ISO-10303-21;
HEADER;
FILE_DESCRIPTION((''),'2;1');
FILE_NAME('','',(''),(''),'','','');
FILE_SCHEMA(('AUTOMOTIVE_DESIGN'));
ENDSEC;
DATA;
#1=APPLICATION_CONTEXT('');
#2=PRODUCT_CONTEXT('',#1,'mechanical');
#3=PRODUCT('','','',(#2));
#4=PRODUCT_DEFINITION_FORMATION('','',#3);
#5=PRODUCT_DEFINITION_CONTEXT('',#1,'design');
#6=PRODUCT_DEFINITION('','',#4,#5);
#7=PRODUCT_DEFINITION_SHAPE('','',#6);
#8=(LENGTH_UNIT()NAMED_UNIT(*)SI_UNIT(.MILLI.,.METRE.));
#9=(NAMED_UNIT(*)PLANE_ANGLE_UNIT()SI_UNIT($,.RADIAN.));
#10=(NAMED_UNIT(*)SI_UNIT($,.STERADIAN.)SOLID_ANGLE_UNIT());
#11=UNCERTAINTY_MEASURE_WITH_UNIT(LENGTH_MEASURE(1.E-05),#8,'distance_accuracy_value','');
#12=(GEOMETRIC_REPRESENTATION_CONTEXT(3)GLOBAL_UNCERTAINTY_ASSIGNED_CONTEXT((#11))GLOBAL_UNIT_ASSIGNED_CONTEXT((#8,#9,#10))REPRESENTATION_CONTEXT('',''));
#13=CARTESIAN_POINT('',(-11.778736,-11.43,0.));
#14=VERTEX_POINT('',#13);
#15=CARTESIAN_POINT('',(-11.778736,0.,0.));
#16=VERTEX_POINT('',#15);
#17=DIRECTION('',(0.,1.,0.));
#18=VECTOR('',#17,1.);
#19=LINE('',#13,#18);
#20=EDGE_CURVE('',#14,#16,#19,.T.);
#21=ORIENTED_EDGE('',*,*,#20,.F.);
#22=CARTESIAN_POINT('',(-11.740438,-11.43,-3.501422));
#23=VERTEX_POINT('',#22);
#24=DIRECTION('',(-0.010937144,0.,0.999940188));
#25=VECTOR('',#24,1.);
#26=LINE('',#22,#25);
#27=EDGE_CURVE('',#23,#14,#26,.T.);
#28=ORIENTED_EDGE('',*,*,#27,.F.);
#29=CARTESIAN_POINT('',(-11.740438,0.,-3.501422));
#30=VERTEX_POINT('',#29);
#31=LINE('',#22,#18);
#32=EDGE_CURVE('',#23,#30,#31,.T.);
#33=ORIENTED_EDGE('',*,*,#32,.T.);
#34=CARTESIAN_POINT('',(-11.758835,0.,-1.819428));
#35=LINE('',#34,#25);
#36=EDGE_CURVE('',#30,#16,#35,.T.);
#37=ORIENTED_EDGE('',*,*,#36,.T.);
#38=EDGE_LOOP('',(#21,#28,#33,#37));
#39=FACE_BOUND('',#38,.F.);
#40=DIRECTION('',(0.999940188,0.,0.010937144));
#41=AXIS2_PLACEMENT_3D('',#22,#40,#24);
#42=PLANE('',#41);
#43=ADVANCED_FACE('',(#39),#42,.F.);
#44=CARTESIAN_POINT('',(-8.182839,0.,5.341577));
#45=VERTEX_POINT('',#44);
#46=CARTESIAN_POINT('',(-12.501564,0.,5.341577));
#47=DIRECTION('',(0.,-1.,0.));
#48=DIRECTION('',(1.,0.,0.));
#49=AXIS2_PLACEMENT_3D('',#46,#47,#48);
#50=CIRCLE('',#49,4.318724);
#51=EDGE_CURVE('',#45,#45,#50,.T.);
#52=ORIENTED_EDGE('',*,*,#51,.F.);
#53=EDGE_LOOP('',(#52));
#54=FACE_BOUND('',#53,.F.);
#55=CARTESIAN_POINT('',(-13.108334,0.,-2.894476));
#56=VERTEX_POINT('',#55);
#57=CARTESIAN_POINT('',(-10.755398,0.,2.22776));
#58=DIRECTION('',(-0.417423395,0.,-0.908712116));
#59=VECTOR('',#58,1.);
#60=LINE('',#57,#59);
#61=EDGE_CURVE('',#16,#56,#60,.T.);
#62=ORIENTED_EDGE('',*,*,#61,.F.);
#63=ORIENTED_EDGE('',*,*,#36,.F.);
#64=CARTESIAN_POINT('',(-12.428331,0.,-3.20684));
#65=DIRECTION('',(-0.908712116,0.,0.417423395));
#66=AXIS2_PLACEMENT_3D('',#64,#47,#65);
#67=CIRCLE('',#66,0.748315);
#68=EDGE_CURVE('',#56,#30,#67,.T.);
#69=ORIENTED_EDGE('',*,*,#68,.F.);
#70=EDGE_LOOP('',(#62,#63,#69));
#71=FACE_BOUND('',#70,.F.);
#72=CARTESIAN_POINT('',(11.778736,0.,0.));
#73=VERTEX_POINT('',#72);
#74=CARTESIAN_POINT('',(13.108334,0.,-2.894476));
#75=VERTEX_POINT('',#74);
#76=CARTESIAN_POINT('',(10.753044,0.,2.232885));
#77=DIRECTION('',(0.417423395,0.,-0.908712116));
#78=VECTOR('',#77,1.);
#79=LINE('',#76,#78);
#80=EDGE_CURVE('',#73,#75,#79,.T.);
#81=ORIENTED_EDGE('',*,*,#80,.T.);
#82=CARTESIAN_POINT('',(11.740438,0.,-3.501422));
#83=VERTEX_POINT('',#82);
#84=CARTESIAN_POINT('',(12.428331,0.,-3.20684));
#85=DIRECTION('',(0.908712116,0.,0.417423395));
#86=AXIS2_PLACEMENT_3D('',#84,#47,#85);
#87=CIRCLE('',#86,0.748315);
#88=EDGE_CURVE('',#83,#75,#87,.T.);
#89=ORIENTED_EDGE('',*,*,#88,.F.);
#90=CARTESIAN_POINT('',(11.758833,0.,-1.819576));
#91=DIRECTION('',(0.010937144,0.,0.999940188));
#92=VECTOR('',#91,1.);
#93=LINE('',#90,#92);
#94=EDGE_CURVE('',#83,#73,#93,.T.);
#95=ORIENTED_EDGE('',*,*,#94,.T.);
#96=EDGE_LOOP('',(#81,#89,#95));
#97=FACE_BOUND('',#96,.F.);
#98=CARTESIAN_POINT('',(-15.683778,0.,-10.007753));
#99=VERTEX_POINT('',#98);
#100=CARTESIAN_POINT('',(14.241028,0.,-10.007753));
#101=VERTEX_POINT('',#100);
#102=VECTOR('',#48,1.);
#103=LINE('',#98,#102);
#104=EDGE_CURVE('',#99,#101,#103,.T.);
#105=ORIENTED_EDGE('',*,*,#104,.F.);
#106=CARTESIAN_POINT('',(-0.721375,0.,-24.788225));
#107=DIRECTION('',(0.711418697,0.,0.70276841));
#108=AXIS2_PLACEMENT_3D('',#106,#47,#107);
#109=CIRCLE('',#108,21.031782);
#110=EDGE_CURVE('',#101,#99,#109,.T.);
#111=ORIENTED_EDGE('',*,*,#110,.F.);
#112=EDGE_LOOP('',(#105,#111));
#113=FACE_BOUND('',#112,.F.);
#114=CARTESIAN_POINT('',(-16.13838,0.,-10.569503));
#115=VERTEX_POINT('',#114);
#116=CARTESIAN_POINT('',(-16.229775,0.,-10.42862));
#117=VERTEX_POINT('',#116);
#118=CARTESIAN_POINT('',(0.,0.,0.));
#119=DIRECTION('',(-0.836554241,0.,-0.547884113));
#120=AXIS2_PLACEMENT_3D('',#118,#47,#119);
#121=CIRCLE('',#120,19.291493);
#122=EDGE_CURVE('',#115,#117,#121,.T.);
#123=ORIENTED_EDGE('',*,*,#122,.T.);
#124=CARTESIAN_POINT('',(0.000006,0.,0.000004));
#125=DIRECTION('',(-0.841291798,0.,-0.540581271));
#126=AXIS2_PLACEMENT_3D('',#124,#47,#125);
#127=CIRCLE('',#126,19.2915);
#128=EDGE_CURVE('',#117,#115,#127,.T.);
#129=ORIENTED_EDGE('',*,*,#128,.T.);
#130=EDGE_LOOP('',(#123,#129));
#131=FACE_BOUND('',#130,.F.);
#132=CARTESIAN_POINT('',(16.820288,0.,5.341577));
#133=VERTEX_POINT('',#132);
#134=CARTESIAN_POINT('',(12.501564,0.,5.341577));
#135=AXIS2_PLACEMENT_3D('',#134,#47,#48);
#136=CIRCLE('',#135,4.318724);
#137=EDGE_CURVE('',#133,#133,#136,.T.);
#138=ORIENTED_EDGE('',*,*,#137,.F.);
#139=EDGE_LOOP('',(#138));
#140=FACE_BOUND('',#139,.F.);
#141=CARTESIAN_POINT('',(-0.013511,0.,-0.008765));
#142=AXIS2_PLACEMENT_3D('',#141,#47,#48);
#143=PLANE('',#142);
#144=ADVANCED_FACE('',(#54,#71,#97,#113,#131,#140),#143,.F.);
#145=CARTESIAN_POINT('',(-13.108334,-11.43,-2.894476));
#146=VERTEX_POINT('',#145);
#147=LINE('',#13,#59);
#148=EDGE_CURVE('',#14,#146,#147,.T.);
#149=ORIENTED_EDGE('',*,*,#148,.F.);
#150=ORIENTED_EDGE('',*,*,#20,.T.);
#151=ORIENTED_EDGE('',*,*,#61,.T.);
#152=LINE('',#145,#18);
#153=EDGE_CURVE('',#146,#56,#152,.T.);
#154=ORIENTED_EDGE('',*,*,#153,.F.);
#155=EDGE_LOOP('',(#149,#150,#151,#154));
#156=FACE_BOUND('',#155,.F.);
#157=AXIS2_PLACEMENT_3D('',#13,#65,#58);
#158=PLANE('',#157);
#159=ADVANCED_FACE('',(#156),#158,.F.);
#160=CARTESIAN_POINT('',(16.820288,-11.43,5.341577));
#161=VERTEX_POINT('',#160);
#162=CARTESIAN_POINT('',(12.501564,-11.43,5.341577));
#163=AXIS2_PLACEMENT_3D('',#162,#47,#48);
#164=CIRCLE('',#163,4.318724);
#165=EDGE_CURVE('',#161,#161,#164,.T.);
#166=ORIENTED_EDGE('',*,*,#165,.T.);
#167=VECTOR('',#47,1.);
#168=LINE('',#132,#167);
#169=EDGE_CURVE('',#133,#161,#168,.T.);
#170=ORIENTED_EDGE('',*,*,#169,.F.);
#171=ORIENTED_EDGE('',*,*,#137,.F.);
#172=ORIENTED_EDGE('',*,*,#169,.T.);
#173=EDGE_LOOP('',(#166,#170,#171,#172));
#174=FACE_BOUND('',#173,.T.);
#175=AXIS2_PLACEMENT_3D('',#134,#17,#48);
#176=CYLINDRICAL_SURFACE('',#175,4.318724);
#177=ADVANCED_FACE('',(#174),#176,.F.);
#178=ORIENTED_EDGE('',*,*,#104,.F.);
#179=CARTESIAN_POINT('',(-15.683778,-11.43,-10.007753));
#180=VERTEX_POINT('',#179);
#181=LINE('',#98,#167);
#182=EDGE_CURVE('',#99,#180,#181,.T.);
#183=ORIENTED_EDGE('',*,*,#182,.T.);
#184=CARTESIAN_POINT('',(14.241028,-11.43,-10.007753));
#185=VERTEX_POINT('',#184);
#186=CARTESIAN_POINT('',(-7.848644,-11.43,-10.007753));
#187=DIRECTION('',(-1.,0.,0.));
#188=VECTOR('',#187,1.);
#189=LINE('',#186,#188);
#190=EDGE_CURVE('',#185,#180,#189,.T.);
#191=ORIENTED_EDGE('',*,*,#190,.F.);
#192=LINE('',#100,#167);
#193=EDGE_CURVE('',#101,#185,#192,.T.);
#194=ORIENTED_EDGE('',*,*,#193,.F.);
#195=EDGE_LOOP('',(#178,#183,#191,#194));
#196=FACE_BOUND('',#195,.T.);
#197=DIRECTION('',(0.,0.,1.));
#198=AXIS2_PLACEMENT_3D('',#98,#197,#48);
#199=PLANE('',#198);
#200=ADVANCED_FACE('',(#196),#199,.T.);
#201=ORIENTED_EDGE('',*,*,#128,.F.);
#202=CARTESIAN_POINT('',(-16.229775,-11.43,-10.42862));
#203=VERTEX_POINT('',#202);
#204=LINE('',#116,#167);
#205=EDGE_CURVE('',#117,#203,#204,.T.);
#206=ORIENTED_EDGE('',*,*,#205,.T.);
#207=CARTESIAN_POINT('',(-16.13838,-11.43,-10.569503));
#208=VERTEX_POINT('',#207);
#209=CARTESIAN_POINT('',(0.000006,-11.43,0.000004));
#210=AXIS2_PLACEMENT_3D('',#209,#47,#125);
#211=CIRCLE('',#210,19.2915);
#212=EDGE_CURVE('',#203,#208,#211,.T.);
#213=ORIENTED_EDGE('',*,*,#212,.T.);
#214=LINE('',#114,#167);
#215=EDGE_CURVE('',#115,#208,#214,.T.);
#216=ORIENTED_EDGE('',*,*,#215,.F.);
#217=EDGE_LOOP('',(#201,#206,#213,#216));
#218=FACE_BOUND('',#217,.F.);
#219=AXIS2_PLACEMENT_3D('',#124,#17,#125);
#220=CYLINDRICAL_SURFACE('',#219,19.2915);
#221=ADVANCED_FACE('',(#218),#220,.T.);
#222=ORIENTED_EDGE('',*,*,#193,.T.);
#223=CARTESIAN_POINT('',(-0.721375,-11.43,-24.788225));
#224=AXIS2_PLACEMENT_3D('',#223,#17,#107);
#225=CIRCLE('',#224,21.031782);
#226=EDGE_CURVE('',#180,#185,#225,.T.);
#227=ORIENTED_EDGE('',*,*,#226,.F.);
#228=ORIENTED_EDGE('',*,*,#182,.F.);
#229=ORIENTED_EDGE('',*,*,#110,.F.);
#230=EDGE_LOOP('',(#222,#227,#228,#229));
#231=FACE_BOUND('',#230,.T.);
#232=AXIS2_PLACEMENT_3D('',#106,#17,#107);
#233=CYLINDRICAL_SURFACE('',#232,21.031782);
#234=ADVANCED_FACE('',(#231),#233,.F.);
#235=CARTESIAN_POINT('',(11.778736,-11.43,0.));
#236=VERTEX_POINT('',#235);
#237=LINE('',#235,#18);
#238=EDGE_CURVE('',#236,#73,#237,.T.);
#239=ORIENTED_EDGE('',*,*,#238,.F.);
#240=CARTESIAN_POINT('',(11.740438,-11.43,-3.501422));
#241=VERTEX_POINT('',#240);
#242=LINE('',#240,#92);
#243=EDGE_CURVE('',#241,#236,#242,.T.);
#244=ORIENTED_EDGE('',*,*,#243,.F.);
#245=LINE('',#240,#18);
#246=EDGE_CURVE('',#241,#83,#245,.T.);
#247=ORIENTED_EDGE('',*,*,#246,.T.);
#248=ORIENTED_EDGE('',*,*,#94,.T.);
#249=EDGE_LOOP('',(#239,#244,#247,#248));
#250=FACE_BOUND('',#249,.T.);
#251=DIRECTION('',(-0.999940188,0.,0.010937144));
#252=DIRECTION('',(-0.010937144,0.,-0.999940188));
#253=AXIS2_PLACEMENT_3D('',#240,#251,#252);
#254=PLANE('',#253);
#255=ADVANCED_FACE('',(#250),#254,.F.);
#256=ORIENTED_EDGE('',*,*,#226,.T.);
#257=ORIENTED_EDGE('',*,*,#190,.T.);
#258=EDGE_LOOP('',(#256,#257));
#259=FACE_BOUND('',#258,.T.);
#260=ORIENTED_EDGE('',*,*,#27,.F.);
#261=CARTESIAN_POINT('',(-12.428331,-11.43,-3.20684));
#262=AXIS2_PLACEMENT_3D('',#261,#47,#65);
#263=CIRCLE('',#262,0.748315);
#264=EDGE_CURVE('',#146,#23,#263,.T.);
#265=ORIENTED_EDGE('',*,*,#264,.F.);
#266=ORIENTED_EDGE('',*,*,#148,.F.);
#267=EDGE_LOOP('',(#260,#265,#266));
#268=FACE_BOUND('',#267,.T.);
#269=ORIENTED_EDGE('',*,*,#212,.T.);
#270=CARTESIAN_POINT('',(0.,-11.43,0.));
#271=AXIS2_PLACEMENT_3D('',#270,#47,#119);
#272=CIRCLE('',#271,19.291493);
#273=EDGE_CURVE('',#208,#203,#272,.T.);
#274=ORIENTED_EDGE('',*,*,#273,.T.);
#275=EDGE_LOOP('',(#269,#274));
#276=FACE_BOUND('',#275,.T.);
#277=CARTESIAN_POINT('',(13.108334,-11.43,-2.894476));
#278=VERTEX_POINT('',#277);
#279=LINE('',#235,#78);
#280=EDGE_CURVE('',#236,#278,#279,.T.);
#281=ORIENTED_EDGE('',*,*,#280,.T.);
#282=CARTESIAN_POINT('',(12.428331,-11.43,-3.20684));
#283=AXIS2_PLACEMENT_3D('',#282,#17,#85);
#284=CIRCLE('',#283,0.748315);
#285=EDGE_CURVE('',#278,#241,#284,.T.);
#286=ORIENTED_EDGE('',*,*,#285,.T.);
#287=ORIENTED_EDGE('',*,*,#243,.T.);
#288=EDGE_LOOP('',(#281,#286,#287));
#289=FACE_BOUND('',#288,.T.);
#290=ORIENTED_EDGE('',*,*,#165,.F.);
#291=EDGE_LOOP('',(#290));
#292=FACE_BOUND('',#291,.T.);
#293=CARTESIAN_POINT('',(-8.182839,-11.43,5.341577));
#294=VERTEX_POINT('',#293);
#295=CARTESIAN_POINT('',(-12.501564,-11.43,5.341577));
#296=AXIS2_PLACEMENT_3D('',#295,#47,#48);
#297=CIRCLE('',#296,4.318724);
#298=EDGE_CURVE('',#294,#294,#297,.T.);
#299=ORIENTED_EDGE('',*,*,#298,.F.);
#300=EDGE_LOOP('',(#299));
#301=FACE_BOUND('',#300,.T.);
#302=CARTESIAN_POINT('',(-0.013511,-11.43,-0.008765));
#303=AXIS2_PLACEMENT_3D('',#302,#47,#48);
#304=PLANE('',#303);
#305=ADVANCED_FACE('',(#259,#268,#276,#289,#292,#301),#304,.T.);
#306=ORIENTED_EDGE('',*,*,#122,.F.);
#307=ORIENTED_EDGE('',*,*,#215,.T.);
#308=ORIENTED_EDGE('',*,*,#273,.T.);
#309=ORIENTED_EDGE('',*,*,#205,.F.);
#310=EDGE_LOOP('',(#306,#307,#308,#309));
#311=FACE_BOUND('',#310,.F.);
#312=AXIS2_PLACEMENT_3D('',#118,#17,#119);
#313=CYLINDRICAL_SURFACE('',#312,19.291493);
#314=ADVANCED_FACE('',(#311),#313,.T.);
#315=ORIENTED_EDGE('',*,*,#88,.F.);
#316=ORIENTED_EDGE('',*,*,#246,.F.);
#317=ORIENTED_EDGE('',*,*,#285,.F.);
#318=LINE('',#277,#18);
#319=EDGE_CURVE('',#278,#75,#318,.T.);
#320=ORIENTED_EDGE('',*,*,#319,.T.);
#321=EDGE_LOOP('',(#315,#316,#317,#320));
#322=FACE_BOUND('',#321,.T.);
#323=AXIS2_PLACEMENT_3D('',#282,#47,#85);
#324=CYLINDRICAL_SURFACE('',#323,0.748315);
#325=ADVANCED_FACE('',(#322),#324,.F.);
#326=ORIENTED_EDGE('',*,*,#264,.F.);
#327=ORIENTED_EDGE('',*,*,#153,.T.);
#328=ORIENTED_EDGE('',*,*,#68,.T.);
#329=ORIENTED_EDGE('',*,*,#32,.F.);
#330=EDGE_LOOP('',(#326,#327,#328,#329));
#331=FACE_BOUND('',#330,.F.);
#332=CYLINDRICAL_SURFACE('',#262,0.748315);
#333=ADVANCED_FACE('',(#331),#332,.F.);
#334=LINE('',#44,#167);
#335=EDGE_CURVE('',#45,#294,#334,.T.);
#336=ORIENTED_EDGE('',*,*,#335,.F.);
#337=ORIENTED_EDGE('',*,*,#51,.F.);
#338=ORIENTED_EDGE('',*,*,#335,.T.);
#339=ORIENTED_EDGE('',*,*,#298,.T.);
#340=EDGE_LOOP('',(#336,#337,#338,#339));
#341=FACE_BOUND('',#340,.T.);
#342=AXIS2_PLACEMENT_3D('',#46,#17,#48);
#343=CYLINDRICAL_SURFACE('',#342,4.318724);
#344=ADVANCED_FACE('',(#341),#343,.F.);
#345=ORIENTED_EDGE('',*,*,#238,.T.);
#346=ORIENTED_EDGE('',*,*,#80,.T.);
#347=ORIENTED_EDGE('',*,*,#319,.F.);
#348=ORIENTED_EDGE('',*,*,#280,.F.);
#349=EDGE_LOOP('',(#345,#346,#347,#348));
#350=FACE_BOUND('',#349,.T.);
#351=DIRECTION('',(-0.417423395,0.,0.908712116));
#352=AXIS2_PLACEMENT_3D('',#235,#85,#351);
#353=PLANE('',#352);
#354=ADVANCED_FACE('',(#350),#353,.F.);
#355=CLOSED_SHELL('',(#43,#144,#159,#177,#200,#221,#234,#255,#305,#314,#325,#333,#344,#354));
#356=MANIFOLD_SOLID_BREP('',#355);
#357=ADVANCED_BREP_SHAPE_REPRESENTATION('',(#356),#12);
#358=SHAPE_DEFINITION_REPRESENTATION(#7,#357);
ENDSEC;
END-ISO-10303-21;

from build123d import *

# Parameters (mm, degrees)
F0_R     = 4.3187243864
F1_DEPTH = 11.43
F4_DEPTH = 25.4
F6_DEPTH = 25.4


# Not quite as in the source:
# - a pattern or mirror of a feature is missing from the dataset's text; its kind, count and spacing are read off the source's solid
# - the program builds the solid bodies; features that only make, move or delete a surface that nothing else refers to are left out


with BuildPart() as f1:
    # F0 (on Front) → F1 (new body)
    with BuildSketch(Plane.XZ):
        with BuildLine():
            ThreePointArc((-16.2297749531, -10.4286198462), (-16.1842309709, -10.4991606713), (-16.1383803934, -10.5695025995))
            ThreePointArc((-16.1383803934, -10.5695025995), (5.5149003864, -18.4864161116), (19.2914931232, 0))
            ThreePointArc((19.2914931232, 0), (-5.4343865811, 18.5102444449), (-16.2297749531, -10.4286198462))
        make_face()
        with Locations((-12.5015638769, 5.341576878)):
            Circle(F0_R, mode=Mode.SUBTRACT)
        with Locations((12.5015638769, 5.341576878)):
            Circle(F0_R, mode=Mode.SUBTRACT)
    extrude(amount=F1_DEPTH)

    # F2 (on Front) → F4 (cut)
    with BuildSketch(Plane.XZ):
        with BuildLine():
            Line((-15.6837776303, -10.0077530369), (14.2410276458, -10.0077530369))
            ThreePointArc((14.2410276458, -10.0077530369), (-0.7213749923, -3.7564431571), (-15.6837776303, -10.0077530369))
        make_face()
    extrude(amount=F4_DEPTH, mode=Mode.SUBTRACT)

    # F5 (on face) → F6 (cut)
    with BuildSketch(Plane.XZ.offset(11.43)):
        with BuildLine():
            Line((-11.7404377088, -3.5014220048), (-11.7787355557, 0))
            Line((-11.7787355557, 0), (-13.1083335727, -2.8944755904))
            ThreePointArc((-13.1083335727, -2.8944755904), (-12.7318294924, -3.8908455066), (-11.7404377088, -3.5014220048))
        make_face()
    f6 = extrude(amount=-F6_DEPTH, mode=Mode.SUBTRACT)

    # F6_copies: F6 across plane
    add(f6.mirror(Plane(origin=(0, 0, 0), x_dir=(0, 0, 1), z_dir=(1, 0, 0))), mode=Mode.SUBTRACT)


solid = f1.part
